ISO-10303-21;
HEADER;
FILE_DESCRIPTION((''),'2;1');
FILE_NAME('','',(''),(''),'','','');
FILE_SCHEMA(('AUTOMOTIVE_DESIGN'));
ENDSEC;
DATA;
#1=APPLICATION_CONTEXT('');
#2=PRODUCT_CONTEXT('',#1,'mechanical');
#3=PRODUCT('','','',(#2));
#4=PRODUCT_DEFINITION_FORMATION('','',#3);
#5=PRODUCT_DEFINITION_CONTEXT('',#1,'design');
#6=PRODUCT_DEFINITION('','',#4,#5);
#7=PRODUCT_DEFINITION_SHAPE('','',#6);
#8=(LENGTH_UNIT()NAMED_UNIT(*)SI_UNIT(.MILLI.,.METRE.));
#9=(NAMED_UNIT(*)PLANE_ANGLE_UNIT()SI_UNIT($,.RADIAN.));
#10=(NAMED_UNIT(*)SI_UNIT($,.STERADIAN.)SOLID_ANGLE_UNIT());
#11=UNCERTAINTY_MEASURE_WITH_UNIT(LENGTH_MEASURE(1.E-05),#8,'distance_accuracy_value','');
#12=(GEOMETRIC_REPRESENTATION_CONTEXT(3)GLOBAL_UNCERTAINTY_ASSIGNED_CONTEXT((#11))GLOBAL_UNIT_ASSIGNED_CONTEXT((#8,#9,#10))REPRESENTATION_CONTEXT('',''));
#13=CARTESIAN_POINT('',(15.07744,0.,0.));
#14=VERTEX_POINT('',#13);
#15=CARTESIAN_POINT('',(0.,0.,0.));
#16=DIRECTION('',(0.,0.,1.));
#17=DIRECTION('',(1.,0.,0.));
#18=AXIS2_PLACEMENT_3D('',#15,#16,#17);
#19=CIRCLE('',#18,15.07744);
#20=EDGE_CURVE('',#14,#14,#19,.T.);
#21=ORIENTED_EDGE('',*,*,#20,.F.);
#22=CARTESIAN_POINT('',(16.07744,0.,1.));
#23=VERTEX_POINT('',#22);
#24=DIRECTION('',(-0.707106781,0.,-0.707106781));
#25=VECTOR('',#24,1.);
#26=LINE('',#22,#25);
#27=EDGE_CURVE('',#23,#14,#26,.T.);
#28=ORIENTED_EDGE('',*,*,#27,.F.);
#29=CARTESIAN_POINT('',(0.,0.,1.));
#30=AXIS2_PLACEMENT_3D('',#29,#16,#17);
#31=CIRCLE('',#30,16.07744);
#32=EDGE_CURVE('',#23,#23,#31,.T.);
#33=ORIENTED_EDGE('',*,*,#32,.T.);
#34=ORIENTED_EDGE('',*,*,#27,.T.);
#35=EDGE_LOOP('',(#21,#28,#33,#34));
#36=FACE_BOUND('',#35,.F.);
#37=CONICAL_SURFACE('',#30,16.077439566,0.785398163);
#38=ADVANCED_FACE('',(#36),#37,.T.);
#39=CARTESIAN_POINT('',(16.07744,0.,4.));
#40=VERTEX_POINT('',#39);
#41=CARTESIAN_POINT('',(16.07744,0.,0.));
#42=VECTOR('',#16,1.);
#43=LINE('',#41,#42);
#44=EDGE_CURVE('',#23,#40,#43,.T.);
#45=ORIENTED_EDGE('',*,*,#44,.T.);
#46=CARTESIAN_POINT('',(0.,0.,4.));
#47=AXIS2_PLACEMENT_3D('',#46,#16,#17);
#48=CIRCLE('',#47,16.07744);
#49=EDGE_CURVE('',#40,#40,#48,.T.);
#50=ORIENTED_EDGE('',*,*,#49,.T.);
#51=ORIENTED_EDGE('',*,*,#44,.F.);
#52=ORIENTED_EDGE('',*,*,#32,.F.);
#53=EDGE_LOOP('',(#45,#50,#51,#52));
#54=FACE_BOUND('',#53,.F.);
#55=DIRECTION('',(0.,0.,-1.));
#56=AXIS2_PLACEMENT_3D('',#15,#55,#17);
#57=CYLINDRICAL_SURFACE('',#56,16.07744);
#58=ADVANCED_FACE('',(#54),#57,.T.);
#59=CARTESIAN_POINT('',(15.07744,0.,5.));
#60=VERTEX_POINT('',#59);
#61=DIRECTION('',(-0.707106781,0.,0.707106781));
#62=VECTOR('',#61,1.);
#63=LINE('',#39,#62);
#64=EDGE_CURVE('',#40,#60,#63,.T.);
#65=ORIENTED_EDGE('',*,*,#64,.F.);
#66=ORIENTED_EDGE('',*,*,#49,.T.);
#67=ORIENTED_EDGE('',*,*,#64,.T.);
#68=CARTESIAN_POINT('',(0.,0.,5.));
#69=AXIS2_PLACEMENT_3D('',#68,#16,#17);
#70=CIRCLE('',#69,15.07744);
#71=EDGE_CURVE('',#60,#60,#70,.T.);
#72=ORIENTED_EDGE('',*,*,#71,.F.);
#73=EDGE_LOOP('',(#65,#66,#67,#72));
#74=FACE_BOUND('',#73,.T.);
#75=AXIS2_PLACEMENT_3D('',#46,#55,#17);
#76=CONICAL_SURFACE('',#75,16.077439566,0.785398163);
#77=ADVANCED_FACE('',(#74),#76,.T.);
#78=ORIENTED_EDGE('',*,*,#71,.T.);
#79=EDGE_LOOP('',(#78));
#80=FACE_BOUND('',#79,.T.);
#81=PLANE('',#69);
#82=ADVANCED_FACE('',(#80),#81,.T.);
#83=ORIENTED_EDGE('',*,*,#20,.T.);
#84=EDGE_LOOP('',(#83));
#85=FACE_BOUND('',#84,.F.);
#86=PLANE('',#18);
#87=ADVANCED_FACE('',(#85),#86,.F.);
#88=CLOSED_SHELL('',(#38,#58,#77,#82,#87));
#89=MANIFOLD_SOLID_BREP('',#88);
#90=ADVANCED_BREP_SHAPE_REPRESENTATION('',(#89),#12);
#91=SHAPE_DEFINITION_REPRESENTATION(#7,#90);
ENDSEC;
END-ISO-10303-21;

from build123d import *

# Parameters (mm, degrees)
F0_R     = 16.0774395659
F1_DEPTH = 5
F2_SIZE  = 1
F5_SIZE  = 1


# Not quite as in the source:
# - the program builds the solid bodies; features that only make, move or delete a surface that nothing else refers to are left out


with BuildPart() as f1:
    # F0 (on Top) → F1 (new body)
    with BuildSketch(Plane.XY):
        Circle(F0_R)
    extrude(amount=F1_DEPTH)

    # F2
    f2_edges = [f1.edges().sort_by_distance(p)[0] for p in [
        (-16.07744, 0, 5),
    ]]
    chamfer(f2_edges, length=F2_SIZE)

    # F5
    f5_edges = [f1.edges().sort_by_distance(p)[0] for p in [
        (-16.07744, 0, 0),
    ]]
    chamfer(f5_edges, length=F5_SIZE)


solid = f1.part
